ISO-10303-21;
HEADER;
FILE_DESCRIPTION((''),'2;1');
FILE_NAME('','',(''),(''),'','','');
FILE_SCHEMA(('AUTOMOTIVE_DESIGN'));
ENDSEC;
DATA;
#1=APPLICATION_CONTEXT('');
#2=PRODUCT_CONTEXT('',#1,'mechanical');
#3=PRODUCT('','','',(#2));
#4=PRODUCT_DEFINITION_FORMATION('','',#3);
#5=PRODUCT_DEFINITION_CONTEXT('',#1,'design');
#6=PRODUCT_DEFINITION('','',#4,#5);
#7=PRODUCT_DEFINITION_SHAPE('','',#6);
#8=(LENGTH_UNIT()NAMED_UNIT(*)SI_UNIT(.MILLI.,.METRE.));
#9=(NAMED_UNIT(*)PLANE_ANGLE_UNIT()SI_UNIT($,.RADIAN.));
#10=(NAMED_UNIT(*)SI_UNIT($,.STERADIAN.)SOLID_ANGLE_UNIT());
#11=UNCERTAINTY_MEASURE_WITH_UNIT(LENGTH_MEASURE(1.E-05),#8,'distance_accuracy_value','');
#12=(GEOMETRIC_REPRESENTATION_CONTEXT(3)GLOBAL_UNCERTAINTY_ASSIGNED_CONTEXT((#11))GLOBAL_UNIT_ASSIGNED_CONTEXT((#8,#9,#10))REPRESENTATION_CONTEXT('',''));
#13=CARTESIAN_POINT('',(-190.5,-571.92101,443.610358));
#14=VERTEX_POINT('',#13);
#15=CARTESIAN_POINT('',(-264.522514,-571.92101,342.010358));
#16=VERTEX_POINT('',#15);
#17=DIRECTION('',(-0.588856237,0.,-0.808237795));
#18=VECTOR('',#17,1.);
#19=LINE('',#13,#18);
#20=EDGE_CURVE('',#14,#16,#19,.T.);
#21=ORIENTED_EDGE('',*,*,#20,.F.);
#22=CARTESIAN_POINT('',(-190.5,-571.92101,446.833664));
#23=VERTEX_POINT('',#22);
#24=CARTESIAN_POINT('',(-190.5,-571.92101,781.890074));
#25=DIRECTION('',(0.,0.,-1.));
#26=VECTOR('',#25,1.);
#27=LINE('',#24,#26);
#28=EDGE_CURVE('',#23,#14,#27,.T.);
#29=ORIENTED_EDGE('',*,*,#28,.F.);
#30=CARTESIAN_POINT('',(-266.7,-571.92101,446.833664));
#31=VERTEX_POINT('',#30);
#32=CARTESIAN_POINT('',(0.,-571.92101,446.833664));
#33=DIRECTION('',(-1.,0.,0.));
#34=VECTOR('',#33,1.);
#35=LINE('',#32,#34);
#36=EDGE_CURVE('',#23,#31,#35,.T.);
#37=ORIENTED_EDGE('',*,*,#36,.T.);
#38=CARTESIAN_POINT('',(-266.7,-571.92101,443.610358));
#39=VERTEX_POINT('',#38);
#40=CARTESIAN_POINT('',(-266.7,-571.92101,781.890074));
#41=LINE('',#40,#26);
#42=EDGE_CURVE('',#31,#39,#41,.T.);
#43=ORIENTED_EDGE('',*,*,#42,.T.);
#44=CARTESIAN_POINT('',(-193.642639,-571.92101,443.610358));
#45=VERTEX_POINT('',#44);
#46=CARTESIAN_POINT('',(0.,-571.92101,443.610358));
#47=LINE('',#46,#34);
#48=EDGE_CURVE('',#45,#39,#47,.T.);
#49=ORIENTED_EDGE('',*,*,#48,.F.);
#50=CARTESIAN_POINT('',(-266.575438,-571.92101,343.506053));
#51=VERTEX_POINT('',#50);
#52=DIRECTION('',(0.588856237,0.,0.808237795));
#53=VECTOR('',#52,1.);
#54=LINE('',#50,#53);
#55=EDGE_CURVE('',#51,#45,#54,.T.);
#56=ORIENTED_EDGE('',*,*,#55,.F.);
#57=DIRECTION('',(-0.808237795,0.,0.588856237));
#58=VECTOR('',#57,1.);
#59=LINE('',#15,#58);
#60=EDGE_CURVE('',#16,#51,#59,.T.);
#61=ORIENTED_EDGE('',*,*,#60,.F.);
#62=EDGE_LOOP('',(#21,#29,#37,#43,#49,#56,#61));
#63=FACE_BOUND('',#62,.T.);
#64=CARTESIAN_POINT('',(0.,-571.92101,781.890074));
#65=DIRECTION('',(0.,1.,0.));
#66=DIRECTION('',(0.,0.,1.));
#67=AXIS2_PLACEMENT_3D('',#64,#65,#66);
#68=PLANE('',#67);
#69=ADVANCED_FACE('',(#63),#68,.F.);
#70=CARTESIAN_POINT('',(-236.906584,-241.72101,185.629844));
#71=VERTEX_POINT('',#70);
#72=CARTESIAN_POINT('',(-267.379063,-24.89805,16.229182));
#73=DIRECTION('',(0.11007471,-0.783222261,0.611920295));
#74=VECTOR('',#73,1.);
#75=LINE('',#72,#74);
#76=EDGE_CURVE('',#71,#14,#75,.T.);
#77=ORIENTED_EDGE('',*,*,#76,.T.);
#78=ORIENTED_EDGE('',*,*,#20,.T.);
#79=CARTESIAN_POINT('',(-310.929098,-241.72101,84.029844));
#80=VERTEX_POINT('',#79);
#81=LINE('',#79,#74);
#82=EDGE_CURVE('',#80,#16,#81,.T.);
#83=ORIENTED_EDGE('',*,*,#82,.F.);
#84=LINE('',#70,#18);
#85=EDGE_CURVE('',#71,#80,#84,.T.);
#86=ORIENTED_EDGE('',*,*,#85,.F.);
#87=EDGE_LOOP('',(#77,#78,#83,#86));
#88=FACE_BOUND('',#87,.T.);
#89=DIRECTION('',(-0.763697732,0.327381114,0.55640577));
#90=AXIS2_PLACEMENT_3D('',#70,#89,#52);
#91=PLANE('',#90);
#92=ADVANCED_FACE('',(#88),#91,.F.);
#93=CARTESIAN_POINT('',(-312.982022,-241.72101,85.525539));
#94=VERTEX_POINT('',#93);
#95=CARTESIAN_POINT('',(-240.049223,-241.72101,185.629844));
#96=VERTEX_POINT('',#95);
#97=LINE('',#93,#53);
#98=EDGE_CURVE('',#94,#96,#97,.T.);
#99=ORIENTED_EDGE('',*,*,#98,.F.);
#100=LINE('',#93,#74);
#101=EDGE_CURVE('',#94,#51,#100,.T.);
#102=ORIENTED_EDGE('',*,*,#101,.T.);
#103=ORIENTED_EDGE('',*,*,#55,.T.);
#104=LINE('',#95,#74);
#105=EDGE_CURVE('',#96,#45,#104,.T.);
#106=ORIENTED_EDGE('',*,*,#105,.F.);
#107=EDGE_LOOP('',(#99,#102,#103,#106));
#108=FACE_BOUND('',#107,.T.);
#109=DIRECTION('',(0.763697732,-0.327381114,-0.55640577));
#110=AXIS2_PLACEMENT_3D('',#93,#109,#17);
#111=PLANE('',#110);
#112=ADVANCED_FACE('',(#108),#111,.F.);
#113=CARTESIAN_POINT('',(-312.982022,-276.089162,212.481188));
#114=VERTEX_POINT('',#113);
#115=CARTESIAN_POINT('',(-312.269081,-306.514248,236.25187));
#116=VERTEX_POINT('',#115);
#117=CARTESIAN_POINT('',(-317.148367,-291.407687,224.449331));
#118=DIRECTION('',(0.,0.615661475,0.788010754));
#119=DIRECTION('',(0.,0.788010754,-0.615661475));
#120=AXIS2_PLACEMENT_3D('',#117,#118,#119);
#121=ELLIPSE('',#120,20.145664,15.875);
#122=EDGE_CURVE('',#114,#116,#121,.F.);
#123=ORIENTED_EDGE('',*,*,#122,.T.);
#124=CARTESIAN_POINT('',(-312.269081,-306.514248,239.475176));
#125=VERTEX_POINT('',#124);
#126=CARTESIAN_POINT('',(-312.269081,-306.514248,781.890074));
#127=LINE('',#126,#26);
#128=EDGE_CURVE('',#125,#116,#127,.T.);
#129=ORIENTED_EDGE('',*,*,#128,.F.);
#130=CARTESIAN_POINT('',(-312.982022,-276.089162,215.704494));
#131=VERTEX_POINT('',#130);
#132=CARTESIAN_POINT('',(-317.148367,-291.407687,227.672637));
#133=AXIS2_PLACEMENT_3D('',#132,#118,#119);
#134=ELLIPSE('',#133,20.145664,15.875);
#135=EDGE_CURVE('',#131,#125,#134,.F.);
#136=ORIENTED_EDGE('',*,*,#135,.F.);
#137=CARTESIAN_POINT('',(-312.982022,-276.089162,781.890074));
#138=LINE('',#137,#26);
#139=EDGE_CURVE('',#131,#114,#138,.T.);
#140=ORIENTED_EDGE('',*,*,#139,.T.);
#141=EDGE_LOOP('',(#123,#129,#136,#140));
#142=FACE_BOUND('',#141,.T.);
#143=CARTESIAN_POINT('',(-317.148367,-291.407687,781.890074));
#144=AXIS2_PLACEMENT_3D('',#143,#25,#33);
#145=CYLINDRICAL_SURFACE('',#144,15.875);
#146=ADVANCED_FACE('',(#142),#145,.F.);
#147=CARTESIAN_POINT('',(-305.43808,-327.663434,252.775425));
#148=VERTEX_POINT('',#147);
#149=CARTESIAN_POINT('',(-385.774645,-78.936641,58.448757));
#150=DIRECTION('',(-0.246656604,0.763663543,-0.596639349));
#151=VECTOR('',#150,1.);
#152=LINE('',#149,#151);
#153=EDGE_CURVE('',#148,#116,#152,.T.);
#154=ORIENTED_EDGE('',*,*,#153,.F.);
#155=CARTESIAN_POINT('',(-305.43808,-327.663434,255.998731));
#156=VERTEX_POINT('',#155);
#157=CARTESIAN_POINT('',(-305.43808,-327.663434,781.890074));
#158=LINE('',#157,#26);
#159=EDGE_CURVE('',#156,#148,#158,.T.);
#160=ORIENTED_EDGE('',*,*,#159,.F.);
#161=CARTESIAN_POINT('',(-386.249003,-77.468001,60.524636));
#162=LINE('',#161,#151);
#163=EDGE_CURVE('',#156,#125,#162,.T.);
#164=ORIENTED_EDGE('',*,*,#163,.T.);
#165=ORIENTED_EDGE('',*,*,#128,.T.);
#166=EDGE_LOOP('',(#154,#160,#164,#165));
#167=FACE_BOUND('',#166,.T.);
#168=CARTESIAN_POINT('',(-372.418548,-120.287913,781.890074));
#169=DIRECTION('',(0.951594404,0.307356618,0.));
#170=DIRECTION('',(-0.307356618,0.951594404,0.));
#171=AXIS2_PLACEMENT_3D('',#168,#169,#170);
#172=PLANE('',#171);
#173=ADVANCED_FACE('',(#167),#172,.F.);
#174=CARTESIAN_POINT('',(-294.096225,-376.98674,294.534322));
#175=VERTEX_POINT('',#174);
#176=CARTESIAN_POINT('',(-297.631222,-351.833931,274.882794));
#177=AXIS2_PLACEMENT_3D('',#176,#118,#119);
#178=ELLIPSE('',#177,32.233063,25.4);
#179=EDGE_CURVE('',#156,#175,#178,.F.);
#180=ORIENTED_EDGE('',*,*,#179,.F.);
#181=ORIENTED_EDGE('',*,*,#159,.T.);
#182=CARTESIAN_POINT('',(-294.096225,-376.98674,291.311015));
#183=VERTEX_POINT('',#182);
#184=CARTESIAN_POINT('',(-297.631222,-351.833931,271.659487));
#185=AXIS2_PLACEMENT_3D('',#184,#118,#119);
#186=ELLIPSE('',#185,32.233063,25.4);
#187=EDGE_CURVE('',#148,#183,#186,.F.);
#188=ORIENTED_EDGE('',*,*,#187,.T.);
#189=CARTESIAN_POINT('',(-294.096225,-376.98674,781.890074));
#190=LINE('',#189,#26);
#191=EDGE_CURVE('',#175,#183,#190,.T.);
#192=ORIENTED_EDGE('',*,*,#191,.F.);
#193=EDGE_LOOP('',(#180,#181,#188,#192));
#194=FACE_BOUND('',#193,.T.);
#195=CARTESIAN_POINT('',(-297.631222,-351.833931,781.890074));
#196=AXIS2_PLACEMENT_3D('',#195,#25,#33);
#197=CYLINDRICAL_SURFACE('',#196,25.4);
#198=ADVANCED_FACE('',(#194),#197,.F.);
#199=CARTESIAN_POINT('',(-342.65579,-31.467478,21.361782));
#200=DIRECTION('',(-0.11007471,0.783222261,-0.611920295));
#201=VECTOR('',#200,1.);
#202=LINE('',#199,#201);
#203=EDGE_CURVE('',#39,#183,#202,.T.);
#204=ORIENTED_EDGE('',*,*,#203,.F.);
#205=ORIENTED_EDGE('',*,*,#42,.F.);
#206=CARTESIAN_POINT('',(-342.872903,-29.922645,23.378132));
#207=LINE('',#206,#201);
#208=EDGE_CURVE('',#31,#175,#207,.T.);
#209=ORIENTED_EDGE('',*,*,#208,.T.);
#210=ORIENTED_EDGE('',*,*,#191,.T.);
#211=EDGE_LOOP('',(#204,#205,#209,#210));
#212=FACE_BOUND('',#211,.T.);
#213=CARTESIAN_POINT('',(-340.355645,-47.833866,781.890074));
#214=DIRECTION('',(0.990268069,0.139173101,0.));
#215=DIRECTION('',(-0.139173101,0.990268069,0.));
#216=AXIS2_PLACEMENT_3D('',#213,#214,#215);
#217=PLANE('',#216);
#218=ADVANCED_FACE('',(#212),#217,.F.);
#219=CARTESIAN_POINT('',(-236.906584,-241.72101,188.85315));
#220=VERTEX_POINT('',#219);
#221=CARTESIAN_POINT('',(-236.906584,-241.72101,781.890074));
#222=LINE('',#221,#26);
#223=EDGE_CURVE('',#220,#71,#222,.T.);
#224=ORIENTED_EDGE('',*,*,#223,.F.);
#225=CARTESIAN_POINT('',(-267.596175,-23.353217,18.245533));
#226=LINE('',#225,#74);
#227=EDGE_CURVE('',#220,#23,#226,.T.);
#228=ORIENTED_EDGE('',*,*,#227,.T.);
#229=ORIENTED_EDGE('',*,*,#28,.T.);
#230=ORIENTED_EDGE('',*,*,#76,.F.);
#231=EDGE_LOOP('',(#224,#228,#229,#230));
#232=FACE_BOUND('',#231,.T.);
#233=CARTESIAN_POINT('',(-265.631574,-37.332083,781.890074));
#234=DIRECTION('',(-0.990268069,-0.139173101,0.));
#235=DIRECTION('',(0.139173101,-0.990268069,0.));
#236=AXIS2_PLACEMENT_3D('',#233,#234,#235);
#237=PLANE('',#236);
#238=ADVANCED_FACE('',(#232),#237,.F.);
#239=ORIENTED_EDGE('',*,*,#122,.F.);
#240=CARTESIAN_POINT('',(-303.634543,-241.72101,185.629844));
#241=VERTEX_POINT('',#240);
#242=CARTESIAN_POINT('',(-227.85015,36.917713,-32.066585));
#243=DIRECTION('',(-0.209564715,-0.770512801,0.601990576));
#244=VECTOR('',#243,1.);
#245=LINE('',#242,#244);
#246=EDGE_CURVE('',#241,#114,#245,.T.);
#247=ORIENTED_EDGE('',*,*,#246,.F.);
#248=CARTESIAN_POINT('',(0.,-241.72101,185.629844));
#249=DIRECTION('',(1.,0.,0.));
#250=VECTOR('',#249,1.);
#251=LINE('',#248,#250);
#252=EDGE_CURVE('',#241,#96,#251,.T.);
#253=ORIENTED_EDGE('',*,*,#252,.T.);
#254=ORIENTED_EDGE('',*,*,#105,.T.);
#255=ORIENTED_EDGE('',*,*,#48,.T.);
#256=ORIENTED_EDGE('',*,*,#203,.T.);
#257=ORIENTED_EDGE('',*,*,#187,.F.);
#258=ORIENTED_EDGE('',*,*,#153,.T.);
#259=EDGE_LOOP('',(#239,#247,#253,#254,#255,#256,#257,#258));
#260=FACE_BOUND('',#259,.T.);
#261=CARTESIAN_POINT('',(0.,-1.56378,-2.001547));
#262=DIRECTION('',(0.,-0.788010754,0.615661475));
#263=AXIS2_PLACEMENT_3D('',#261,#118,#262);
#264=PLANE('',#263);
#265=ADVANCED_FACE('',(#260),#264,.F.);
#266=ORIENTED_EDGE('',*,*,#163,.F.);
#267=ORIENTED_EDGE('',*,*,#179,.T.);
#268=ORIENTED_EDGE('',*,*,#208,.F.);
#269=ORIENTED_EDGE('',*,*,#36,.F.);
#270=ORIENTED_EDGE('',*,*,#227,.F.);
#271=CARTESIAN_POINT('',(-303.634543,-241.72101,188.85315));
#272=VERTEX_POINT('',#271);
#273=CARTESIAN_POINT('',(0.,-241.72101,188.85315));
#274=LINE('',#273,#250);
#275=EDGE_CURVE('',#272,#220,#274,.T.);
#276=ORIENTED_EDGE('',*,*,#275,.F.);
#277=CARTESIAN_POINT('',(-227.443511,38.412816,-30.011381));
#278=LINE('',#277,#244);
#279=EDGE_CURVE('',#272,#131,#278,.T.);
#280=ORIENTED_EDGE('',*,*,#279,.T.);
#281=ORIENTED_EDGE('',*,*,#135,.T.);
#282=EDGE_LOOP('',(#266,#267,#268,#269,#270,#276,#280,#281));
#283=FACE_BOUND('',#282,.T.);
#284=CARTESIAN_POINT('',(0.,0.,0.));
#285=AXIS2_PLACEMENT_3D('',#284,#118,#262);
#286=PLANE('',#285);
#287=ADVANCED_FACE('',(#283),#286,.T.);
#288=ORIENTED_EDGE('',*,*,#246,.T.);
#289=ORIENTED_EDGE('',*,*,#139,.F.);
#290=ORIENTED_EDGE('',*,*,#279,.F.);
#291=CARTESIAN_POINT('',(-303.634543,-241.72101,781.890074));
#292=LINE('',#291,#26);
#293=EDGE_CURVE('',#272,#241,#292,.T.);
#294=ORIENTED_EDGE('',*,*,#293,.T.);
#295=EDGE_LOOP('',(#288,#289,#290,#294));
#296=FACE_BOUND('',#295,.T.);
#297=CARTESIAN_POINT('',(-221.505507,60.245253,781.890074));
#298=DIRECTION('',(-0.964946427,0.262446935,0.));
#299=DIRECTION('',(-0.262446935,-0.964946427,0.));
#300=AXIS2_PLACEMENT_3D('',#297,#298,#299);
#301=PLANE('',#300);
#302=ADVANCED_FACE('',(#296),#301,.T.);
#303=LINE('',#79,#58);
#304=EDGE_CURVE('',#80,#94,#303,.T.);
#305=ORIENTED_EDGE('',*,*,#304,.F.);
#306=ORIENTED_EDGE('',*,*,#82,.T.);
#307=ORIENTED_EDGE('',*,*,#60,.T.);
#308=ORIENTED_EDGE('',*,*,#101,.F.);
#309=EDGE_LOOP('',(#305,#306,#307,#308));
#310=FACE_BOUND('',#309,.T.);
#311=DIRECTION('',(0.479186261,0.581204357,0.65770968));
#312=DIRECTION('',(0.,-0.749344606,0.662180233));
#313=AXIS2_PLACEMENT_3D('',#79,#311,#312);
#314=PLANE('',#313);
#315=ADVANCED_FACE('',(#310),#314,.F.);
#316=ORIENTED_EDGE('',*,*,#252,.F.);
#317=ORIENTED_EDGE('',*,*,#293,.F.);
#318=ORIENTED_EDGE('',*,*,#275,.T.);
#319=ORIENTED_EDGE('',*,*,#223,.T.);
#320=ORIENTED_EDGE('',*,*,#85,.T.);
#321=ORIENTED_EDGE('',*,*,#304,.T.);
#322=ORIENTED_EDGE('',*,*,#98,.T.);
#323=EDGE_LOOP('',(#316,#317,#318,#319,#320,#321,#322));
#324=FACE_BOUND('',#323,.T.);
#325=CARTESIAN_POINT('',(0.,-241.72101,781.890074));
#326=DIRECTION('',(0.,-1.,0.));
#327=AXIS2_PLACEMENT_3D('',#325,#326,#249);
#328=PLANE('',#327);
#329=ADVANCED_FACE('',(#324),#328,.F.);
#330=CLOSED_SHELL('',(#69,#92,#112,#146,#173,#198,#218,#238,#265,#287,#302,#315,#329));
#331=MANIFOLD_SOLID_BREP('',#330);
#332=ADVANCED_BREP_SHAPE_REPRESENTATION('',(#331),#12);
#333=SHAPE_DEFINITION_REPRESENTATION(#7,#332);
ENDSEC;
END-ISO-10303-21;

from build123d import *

# Parameters (mm, degrees)
BOSS_EXTRUDE1_DEPTH     = 2.54
SKETCH3_W               = 635
SKETCH3_H               = 1270
BOSS_EXTRUDE2_DEPTH     = 2.54
CUT_EXTRUDE1_DEPTH      = 1311.281906829
CUT_EXTRUDE1_DEPTH_BACK = 1311.281906829
SKETCH4_OUTSIDE_W       = 934.392
SKETCH4_OUTSIDE_H       = 1301.729


with BuildPart() as part:
    # Sketch2 → Boss-Extrude1 (new body)
    with BuildSketch(Plane(origin=(0, 0, 0), x_dir=(1, 0, 0), z_dir=(0, 1, 0))):
        with BuildLine():
            Line((-190.5, 0), (190.5, 0))
            Line((190.5, 0), (172.589792707, 64.649970609))
            ThreePointArc((172.589792707, 64.649970609), (148.320865378, 100.476994518), (107.315, 114.3))
            Line((107.315, 114.3), (-107.315, 114.3))
            ThreePointArc((-107.315, 114.3), (-148.320865378, 100.476994518), (-172.589792707, 64.649970609))
            Line((-172.589792707, 64.649970609), (-190.5, 0))
        make_face()
    extrude(amount=-BOSS_EXTRUDE1_DEPTH)

    # Sketch3 → Boss-Extrude2 (add)
    with BuildSketch(Plane(origin=(0, 0, 0), x_dir=(1, 0, 0), z_dir=(0, 0.6156614753256567, 0.7880107536067232))):
        with Locations((0, -635)):
            Rectangle(SKETCH3_W, SKETCH3_H)
    extrude(amount=-BOSS_EXTRUDE2_DEPTH)

    # Sketch4 outside → Cut-Extrude1 (cut, two sides: drawn at the far end of the back side and taken through both)
    with BuildSketch(Plane.XY.offset(-CUT_EXTRUDE1_DEPTH_BACK)):
        with Locations((0, -501.1685)):
            Rectangle(SKETCH4_OUTSIDE_W, SKETCH4_OUTSIDE_H)
        with BuildLine():
            Line((-266.7, -571.921009662), (-190.5, -571.921009662))
            Line((-190.5, -571.921009662), (-236.906583619, -241.721009662))
            Line((-236.906583619, -241.721009662), (-303.634542969, -241.721009662))
            Line((-303.634542969, -241.721009662), (-312.982021819, -276.089162217))
            ThreePointArc((-312.982021819, -276.089162217), (-304.535747178, -281.767279678), (-301.273366919, -291.407686738))
            ThreePointArc((-301.273366919, -291.407686738), (-304.313369935, -300.749981822), (-312.269080611, -306.514247899))
            Line((-312.269080611, -306.514247899), (-305.43807978, -327.663433526))
            ThreePointArc((-305.43807978, -327.663433526), (-282.683549554, -331.297936211), (-272.231221688, -351.833931384))
            ThreePointArc((-272.231221688, -351.833931384), (-278.461598351, -368.497830721), (-294.096224924, -376.98674033))
            Line((-294.096224924, -376.98674033), (-266.7, -571.921009662))
        make_face(mode=Mode.SUBTRACT)
    extrude(amount=CUT_EXTRUDE1_DEPTH + CUT_EXTRUDE1_DEPTH_BACK, mode=Mode.SUBTRACT)

    # Sweep1: sweep along a curve in space
    with BuildLine() as sweep1_path:
        Line((-236.906583619, -241.721009662, 185.629844207), (-190.5, -571.921009662, 443.61035808))
    # Sketch8 → Sweep1 (sweep)
    with BuildSketch(Plane(origin=(0, -241.721009662, 0), x_dir=(1, 0, 0), z_dir=(0, 1, 0))):
        Polygon((-236.906583619, -185.629844207), (-310.929097821, -84.029844207), (-312.982021819, -85.525539048), (-240.049223095, -185.629844207), align=None)
    sweep(path=sweep1_path.line)


solid = part.part
